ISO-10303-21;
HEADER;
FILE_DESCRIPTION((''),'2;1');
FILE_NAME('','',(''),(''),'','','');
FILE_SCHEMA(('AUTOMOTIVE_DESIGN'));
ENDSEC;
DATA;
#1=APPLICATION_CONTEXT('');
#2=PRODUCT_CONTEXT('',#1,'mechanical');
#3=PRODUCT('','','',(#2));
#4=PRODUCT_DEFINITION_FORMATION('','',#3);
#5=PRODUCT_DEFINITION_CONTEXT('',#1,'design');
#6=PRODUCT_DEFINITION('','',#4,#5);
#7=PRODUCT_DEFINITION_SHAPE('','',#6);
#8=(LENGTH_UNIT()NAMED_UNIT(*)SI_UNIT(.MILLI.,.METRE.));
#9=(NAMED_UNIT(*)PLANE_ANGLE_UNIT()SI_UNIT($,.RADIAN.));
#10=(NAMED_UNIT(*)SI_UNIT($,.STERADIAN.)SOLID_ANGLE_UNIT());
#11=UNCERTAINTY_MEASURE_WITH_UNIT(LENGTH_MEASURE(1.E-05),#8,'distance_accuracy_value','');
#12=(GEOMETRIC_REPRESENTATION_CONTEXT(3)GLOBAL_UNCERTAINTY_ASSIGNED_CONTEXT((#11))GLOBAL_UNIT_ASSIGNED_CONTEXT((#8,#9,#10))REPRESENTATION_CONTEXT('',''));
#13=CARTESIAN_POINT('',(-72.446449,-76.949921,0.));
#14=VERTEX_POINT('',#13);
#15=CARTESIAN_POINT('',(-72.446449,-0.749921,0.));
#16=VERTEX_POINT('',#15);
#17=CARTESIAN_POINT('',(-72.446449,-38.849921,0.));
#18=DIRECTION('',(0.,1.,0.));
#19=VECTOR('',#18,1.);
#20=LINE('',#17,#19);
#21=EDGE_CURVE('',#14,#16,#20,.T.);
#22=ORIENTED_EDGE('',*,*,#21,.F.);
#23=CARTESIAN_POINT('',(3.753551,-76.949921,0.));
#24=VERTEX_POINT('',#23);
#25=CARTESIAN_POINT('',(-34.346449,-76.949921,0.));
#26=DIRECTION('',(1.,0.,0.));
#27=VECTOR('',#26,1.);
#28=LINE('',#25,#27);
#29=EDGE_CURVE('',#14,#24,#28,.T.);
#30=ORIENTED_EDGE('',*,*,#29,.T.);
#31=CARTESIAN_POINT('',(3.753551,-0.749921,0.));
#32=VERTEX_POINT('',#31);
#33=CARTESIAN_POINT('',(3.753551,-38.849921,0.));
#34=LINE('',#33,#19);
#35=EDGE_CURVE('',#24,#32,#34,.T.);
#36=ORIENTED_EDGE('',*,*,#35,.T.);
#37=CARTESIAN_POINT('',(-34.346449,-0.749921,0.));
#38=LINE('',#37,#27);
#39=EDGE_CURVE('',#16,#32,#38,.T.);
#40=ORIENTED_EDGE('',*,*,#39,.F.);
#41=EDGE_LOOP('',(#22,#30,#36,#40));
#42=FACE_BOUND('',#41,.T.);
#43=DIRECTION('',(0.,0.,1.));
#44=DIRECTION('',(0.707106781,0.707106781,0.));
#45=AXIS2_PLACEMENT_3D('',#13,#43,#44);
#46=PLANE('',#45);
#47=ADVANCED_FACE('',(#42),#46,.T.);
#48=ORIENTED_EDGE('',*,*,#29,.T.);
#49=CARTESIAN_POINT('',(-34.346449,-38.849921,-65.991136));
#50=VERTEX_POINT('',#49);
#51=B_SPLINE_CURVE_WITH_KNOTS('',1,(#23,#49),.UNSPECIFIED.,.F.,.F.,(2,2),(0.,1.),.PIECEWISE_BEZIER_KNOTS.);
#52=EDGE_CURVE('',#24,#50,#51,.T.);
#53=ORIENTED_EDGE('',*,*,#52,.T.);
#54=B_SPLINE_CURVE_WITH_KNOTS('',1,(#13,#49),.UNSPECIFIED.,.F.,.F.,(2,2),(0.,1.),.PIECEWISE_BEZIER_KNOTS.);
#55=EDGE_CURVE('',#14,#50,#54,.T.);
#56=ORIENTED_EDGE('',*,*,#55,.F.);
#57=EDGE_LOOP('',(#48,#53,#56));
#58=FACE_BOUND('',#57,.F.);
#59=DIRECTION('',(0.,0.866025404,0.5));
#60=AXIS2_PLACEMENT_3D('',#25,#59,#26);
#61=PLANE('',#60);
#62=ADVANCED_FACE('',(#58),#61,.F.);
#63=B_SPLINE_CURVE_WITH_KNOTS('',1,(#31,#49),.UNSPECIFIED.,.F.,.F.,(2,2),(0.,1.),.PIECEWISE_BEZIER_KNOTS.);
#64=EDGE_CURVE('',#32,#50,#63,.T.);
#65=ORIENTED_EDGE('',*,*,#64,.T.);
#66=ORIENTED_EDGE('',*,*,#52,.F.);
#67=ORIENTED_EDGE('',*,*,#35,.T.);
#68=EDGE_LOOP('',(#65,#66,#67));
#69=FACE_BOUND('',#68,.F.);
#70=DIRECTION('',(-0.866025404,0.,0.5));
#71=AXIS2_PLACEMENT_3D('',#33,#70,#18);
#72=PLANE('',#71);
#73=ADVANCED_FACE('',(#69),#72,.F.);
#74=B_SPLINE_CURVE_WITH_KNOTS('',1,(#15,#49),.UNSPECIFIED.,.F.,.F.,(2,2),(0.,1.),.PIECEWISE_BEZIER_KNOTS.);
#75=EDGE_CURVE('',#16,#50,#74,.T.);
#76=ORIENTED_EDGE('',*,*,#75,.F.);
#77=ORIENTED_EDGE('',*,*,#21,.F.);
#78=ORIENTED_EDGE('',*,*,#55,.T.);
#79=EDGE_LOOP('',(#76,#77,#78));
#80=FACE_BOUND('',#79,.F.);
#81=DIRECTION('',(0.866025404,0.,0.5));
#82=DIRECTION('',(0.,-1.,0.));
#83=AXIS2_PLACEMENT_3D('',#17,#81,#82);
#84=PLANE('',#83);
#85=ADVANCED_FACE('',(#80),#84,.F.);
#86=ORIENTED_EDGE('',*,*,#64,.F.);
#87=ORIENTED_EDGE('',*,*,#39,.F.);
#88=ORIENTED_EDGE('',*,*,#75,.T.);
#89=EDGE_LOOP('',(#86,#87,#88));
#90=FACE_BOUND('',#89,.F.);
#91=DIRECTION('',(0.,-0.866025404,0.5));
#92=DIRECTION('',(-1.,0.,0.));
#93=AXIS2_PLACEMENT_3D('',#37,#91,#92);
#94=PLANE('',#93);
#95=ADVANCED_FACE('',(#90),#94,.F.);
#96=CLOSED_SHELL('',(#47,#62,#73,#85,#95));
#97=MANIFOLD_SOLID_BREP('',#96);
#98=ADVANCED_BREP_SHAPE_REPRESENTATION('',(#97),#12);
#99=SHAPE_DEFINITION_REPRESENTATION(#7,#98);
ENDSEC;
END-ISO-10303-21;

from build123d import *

# Parameters (mm, degrees)
F0_W = 76.2
F0_H = 76.2


# Not quite as in the source:
# - an extrude whose draft closes it to a point is written as a loft to that point


with BuildPart() as f1:
    # F0 (on Top) → F1 section 0
    with BuildSketch(Plane.XY, mode=Mode.PRIVATE) as f1_s0:
        with Locations((-34.3464494912, -38.8499209657)):
            Rectangle(F0_W, F0_H)
    loft([f1_s0.sketch, Vertex(-34.3464494912, -38.8499209657, -65.9911357684)], ruled=True)


solid = f1.part
